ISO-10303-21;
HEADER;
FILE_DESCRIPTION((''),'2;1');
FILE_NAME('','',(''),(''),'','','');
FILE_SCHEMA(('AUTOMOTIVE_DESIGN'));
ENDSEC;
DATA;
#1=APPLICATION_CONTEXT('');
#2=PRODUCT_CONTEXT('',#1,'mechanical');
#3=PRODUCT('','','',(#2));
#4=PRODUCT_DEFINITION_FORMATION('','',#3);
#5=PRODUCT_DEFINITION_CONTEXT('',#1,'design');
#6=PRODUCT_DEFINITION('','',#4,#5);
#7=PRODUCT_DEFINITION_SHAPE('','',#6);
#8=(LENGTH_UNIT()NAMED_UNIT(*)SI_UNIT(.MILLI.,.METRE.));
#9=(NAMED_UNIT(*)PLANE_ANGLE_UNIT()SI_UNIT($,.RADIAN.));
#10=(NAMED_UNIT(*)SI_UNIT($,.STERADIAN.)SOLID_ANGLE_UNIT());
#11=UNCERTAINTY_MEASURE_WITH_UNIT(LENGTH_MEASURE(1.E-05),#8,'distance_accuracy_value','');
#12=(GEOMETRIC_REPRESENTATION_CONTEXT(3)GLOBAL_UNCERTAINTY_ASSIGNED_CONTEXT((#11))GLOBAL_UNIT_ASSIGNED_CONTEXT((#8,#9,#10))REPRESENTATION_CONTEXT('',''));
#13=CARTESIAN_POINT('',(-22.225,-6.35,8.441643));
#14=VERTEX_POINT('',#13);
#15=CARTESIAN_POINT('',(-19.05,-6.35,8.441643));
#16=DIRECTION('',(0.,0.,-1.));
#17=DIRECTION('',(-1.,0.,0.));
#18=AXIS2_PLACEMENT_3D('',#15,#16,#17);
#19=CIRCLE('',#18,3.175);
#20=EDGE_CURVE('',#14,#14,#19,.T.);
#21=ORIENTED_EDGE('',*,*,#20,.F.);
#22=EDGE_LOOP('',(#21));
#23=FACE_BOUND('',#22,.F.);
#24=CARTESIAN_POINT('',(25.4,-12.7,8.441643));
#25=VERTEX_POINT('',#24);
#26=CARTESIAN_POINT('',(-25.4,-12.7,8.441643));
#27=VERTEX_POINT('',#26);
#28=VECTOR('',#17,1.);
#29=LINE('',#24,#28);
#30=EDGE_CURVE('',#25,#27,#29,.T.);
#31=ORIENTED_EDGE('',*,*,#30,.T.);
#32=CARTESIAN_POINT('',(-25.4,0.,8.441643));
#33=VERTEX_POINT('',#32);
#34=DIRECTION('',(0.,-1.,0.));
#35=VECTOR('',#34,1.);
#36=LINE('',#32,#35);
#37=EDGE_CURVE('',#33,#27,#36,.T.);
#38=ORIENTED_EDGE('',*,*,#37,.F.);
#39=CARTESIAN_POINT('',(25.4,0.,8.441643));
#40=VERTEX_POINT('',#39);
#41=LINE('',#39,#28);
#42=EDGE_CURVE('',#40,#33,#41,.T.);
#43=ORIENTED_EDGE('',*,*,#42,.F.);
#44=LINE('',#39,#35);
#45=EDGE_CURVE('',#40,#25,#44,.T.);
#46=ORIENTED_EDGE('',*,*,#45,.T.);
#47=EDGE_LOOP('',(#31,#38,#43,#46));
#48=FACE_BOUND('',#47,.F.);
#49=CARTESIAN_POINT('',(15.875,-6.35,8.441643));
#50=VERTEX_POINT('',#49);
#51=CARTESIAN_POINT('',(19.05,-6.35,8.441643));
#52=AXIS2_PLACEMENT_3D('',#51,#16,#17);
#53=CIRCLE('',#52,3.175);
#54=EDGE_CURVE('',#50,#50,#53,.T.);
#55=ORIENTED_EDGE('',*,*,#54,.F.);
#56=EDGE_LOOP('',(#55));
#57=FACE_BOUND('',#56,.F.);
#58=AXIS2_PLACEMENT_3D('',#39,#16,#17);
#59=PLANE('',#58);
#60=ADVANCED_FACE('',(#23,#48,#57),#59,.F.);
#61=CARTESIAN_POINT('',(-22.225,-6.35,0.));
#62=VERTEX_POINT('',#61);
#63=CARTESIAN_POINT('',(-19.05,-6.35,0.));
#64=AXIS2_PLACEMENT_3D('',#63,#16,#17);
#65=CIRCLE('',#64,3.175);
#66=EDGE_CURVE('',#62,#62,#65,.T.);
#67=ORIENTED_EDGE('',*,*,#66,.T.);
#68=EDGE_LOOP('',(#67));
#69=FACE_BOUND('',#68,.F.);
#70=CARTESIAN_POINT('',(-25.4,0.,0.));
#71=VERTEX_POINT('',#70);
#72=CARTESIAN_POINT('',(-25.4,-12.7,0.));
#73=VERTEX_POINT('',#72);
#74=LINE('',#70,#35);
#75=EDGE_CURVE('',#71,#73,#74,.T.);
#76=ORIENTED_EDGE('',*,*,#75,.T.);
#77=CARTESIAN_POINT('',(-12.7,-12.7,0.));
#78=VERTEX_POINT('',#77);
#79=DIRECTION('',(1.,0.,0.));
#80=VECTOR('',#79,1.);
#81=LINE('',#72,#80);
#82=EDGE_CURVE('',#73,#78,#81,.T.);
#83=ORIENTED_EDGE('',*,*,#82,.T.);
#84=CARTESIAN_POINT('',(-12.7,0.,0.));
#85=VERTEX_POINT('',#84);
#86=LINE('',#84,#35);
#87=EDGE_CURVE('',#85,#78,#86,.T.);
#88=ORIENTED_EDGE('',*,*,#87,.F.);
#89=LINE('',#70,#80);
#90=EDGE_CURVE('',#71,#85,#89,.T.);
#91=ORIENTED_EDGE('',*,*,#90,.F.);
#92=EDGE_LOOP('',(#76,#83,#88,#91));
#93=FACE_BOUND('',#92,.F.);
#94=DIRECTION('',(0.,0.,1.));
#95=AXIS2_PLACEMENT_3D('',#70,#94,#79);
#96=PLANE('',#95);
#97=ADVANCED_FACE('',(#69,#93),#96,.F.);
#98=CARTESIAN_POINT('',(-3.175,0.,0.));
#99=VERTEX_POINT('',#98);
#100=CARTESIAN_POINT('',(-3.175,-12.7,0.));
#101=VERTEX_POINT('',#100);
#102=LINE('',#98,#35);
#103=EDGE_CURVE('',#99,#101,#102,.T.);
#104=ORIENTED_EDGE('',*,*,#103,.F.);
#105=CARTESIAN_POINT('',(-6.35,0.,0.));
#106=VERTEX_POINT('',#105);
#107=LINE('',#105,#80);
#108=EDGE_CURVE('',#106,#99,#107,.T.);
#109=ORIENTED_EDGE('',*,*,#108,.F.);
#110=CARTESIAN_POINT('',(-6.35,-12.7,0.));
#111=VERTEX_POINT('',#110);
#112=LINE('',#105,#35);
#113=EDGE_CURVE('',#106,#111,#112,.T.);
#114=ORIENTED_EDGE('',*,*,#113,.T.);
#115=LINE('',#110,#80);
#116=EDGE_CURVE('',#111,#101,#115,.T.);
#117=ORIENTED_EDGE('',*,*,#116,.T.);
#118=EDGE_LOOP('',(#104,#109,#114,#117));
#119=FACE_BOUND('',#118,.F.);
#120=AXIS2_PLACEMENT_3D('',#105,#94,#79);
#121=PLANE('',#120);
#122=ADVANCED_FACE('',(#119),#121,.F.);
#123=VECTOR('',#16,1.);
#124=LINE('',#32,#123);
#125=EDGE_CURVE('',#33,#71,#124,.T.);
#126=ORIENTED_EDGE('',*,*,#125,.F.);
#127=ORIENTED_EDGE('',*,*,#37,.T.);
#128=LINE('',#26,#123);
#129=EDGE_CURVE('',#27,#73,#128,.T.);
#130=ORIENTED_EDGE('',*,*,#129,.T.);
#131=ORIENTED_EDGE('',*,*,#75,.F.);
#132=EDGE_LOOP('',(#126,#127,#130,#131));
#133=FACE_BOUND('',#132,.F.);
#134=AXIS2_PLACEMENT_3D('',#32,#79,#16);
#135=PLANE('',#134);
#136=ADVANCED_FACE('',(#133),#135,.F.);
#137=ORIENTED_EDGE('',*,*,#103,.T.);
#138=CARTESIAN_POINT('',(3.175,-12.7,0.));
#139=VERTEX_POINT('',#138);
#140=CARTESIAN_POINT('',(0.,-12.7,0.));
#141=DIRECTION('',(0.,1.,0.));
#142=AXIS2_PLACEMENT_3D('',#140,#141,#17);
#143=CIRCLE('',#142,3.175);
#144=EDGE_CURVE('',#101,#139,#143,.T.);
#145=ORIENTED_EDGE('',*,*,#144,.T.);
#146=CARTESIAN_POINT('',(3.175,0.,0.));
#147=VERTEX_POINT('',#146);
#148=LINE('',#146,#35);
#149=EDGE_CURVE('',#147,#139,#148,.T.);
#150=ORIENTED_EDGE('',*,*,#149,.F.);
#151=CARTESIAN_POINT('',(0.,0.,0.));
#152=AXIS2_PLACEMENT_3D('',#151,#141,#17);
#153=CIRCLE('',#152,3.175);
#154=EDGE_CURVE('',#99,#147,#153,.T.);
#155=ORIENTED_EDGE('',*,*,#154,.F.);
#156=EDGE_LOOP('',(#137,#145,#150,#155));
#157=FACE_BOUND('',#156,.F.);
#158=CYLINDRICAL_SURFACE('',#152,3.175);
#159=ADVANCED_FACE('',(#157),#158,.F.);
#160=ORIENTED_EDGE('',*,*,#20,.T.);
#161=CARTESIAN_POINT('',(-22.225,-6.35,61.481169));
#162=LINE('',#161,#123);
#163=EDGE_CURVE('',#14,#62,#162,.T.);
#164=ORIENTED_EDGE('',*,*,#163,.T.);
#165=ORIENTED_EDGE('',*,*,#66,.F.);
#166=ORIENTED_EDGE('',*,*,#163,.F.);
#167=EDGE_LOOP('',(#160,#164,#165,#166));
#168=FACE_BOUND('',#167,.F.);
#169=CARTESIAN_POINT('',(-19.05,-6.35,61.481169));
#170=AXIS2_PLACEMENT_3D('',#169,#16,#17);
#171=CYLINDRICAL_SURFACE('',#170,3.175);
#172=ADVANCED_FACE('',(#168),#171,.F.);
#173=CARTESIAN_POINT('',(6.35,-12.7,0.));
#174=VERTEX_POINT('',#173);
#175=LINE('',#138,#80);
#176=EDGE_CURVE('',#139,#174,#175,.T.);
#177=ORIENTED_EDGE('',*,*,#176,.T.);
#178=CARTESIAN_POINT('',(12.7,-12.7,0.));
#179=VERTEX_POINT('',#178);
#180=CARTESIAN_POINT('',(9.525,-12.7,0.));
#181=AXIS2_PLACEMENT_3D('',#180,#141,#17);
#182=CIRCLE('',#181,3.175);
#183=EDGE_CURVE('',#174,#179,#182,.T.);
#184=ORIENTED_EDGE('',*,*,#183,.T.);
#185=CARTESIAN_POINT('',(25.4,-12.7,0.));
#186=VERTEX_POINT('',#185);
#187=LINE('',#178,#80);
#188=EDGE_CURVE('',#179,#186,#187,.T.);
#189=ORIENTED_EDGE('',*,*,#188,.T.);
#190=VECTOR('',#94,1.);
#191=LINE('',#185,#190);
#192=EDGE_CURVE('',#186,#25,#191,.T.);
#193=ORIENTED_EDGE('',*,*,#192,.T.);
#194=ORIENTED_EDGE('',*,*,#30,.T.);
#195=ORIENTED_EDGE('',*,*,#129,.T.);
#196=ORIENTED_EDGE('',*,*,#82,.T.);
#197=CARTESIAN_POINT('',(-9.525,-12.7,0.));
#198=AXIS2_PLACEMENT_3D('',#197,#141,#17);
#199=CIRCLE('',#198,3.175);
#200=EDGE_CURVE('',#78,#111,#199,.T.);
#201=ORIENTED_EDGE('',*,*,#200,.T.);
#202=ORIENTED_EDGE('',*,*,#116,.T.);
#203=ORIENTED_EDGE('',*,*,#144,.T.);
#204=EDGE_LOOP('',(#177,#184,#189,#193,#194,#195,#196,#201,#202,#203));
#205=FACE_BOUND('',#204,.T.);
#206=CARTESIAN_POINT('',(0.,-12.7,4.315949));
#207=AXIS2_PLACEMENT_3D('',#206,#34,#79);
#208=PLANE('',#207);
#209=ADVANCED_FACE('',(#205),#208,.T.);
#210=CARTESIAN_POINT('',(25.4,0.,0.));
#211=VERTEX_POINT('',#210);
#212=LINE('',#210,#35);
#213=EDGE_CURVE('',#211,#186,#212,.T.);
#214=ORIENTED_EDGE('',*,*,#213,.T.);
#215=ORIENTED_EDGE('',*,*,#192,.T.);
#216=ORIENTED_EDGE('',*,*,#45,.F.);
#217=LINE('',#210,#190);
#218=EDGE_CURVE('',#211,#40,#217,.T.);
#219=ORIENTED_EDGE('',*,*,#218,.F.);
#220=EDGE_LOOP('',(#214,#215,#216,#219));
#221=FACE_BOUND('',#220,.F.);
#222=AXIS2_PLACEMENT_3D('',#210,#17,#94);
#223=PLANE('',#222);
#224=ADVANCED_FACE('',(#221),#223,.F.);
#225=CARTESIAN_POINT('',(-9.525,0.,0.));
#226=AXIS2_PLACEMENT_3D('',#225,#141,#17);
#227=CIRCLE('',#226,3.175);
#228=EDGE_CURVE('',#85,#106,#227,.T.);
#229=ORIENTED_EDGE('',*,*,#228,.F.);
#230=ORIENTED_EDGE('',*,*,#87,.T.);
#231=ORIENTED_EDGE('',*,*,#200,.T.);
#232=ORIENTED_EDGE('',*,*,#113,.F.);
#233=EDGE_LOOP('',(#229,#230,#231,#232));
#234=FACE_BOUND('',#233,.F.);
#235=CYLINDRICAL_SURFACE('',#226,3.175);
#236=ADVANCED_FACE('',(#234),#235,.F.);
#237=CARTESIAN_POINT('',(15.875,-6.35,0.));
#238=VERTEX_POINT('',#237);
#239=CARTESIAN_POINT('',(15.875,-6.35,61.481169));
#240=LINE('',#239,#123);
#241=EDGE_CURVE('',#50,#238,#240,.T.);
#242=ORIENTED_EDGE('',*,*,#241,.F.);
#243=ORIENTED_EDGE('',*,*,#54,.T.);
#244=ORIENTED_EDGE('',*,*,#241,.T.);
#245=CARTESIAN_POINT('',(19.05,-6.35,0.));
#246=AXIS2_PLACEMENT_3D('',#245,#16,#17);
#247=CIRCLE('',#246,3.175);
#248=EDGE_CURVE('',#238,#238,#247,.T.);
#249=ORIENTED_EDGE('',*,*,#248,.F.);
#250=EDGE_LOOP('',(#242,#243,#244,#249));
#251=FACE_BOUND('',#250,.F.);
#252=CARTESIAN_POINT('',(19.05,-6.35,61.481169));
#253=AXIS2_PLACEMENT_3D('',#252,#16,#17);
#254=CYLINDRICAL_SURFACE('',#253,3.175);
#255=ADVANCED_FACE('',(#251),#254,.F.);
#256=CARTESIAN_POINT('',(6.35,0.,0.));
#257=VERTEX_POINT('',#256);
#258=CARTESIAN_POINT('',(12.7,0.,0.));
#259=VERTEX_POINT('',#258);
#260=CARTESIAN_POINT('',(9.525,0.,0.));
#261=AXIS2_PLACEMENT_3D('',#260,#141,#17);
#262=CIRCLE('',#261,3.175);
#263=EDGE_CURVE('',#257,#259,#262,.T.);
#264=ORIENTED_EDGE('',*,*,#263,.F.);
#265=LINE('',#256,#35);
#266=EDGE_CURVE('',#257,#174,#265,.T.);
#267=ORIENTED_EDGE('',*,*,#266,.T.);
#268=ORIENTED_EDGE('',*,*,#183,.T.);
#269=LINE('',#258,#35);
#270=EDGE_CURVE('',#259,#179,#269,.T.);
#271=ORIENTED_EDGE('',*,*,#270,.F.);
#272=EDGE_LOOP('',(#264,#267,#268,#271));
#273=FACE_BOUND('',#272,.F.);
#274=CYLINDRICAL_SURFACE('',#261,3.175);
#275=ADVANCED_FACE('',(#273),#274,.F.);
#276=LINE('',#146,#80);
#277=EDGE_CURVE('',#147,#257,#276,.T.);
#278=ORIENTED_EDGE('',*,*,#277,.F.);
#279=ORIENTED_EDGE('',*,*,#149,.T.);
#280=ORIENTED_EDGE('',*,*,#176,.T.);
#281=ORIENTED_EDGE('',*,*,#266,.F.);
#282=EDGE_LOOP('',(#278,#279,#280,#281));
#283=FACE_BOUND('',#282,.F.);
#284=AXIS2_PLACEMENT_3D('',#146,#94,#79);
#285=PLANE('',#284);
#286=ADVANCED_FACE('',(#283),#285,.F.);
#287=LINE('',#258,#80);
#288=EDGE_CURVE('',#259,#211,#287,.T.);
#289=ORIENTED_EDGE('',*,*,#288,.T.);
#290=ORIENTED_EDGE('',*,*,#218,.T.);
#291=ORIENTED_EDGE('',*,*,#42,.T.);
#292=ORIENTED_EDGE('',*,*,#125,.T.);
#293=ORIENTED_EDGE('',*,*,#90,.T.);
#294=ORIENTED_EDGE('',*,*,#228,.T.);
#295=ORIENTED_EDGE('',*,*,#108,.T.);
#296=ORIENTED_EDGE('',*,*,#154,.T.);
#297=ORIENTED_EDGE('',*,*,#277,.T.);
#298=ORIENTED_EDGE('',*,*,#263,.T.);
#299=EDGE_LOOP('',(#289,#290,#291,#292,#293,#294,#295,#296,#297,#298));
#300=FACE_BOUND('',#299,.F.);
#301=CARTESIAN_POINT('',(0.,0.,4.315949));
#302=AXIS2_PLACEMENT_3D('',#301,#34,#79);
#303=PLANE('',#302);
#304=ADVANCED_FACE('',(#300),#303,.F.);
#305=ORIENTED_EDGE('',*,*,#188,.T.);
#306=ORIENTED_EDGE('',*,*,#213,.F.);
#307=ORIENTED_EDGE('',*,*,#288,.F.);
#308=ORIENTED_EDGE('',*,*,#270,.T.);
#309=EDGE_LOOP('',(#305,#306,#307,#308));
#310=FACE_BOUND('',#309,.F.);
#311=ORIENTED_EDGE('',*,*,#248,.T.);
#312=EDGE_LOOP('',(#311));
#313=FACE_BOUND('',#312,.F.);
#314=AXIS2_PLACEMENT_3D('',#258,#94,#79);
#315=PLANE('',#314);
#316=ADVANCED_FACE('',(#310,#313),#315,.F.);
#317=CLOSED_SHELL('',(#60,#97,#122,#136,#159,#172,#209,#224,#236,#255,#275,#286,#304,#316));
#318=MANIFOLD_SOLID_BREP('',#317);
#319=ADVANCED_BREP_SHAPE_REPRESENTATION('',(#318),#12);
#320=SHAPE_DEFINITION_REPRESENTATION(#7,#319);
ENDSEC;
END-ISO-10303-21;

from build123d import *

# Parameters (mm, degrees)
F2_DEPTH = 12.7
F4_D     = 6.35


# Not quite as in the source:
# - a variable given as a bare number and used for a length is read in inches; the dataset says mm whatever the document's units were


with BuildPart() as f2:
    # F1 (on Front) → F2 (new body)
    with BuildSketch(Plane.XZ):
        with BuildLine():
            Line((-25.4, 8.4416426996), (-25.4, 0))
            Line((-25.4, 0), (-12.7, 0))
            ThreePointArc((-12.7, 0), (-9.525, 3.175), (-6.35, 0))
            Line((-6.35, 0), (-3.175, 0))
            ThreePointArc((-3.175, 0), (0, 3.175), (3.175, 0))
            Line((3.175, 0), (6.35, 0))
            ThreePointArc((6.35, 0), (9.525, 3.175), (12.7, 0))
            Line((12.7, 0), (25.4, 0))
            Line((25.4, 0), (25.4, 8.4416426996))
            Line((25.4, 8.4416426996), (-25.4, 8.4416426996))
        make_face()
    extrude(amount=F2_DEPTH)

    # F4 (through all)
    with Locations(Plane.XY.offset(8.4416426996)):
        with Locations((-19.05, -6.35), (19.05, -6.35)):
            Hole(F4_D / 2)


solid = f2.part
